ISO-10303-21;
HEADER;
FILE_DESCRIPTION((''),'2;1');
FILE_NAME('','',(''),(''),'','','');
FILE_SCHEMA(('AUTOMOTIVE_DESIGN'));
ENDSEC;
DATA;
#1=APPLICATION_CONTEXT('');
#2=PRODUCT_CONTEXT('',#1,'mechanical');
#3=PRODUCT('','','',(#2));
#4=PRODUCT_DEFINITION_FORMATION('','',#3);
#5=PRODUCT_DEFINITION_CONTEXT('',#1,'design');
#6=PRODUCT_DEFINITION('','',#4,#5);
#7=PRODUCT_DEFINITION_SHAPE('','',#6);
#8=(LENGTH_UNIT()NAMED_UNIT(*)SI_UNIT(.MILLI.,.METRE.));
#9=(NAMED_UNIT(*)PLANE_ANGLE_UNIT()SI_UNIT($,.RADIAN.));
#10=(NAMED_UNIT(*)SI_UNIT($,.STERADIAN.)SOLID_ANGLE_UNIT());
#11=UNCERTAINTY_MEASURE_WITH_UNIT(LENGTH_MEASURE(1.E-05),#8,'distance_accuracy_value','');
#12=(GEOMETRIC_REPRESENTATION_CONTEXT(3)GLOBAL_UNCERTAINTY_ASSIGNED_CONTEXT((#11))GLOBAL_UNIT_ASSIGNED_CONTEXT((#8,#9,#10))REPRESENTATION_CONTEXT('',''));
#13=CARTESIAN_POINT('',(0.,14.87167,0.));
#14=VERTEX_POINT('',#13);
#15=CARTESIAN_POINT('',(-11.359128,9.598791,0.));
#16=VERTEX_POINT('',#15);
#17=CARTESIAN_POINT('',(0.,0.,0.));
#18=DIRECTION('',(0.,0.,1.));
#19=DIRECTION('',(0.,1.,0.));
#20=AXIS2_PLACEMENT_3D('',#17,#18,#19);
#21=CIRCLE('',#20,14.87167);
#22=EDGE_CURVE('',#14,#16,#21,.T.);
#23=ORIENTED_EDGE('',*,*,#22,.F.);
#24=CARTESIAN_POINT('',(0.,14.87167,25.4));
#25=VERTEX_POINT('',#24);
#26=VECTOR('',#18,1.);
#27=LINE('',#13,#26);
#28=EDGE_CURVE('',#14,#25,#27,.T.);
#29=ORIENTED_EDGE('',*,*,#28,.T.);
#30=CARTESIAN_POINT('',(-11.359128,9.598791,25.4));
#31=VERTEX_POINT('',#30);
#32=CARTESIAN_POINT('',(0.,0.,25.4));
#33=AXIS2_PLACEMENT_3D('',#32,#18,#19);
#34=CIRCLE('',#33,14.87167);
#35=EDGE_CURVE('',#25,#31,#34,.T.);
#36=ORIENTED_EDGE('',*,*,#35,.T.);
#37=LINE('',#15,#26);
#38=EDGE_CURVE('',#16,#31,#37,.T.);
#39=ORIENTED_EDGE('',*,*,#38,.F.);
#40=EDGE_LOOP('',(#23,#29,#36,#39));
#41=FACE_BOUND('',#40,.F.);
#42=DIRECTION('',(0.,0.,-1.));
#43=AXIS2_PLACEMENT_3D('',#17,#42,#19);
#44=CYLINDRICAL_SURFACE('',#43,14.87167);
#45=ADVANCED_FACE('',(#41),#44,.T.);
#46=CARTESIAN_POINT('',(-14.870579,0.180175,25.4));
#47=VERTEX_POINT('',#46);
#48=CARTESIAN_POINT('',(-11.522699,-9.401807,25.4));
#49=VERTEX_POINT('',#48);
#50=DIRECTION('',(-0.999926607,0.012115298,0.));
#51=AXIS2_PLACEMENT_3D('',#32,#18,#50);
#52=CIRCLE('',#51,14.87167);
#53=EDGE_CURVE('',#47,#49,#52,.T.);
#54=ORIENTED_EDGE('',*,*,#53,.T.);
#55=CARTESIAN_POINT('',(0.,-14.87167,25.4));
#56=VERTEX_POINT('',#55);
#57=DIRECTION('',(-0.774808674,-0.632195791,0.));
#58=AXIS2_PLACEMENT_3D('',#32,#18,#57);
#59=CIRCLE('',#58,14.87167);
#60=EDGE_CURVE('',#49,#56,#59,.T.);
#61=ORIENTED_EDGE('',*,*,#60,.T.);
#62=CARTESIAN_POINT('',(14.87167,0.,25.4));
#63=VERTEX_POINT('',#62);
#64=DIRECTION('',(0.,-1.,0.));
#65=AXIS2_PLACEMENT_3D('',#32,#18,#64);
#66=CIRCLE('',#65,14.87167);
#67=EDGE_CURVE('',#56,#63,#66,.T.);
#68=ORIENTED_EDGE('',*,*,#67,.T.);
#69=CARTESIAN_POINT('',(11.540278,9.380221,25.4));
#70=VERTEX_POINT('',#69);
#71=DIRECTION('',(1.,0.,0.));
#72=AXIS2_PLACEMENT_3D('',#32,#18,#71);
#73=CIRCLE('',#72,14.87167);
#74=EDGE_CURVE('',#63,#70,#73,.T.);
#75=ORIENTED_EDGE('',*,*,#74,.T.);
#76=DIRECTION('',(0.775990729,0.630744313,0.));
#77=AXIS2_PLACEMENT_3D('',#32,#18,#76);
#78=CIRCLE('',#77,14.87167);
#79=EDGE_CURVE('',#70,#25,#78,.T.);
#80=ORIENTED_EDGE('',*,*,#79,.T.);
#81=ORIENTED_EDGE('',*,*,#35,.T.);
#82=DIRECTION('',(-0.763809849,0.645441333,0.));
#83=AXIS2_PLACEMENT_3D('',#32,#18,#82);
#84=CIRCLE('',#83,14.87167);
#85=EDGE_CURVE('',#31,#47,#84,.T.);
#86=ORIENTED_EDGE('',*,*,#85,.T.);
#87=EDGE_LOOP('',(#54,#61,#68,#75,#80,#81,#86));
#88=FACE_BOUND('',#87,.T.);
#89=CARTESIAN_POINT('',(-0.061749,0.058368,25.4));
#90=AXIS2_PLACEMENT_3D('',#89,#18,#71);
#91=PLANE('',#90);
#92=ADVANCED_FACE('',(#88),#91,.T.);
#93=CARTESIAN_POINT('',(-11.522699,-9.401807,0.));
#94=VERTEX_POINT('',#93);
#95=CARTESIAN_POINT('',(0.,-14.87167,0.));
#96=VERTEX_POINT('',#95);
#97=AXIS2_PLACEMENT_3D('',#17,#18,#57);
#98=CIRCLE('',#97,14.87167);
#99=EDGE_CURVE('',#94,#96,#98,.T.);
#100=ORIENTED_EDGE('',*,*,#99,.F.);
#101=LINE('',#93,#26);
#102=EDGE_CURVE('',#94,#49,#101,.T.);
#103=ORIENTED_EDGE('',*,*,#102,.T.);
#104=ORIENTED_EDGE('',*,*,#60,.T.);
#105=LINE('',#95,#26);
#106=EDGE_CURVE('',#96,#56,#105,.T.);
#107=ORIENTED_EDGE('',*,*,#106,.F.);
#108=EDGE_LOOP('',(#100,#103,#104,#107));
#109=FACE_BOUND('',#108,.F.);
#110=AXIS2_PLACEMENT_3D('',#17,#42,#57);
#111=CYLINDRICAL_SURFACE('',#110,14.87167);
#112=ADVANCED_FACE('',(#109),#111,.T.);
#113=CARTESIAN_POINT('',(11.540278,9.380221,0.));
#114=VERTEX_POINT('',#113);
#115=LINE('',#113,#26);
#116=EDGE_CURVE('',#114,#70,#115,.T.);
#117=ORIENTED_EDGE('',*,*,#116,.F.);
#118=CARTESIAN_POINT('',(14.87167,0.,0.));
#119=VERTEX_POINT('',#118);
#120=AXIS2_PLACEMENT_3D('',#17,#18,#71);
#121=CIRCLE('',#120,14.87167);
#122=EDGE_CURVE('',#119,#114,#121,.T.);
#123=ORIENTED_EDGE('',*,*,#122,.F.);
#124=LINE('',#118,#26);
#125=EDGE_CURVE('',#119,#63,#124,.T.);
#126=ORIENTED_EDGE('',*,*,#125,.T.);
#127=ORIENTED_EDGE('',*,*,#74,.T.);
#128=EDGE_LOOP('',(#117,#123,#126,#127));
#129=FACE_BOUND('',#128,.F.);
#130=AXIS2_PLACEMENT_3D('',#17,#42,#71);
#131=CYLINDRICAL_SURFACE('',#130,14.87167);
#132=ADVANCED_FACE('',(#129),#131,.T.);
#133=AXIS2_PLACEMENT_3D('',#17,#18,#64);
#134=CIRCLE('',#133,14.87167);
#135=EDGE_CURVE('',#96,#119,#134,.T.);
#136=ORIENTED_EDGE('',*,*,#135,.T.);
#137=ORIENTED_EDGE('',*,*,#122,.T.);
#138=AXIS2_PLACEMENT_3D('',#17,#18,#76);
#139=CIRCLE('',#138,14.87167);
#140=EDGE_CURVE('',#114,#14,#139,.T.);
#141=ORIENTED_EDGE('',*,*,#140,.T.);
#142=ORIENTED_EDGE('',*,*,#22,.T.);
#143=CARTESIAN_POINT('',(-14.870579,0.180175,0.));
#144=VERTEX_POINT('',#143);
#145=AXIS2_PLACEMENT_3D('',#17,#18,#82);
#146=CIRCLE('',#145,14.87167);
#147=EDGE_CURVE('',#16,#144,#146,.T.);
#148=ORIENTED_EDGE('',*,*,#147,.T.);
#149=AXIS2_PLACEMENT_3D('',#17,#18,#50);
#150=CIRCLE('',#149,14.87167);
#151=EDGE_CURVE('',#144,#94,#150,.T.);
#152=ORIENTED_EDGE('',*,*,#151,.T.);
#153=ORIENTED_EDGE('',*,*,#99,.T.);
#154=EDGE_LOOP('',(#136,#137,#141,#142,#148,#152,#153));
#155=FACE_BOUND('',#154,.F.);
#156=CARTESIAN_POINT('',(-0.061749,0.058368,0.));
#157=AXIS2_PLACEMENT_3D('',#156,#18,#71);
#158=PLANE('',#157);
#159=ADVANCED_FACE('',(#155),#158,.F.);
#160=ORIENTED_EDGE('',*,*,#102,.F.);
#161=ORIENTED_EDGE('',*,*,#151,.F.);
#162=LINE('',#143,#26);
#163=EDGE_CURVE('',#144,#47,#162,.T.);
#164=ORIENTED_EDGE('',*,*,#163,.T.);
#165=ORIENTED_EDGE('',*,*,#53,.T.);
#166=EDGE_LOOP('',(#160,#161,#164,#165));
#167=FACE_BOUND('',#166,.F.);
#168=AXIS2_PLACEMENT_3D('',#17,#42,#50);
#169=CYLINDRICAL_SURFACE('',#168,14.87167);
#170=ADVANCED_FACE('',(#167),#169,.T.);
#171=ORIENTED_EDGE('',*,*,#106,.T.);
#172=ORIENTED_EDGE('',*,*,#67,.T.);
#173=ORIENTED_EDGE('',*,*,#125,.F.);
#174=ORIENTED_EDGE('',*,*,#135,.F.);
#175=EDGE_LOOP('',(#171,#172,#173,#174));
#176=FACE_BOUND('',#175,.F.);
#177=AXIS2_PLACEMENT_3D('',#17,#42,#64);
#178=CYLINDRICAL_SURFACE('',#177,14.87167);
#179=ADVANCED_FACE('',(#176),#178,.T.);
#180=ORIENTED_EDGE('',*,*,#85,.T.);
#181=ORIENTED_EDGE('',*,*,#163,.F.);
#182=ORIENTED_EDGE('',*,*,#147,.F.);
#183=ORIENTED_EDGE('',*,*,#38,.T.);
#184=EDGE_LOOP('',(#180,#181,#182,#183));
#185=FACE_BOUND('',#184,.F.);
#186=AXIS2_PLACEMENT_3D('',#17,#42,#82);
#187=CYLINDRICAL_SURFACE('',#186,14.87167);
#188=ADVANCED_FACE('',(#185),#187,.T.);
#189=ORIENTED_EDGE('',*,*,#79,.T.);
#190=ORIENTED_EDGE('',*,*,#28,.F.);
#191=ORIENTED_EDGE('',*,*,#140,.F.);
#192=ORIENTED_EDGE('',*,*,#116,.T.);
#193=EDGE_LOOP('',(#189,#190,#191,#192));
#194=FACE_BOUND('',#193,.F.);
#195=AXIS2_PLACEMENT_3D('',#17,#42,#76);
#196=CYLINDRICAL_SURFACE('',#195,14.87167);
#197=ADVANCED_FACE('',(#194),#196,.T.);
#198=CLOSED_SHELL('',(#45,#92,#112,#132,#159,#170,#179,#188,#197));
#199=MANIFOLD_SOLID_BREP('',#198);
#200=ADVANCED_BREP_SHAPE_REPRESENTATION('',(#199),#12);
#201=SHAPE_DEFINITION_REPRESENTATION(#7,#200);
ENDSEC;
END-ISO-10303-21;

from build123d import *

# Parameters (mm, degrees)
F4_DEPTH = 25.4


# Not quite as in the source:
# - the program builds the solid bodies; features that only make, move or delete a surface that nothing else refers to are left out


with BuildPart() as f4:
    # F2 (on Top) → F4 (new body)
    with BuildSketch(Plane.XY):
        with BuildLine():
            ThreePointArc((0, -14.8716701685), (10.5158588237, -10.5158588237), (14.8716701685, 0))
            ThreePointArc((14.8716701685, 0), (14.0140961938, 4.9771157786), (11.5402781738, 9.3802213871))
            ThreePointArc((11.5402781738, 9.3802213871), (6.390110133, 13.4288147686), (0, 14.8716701685))
            ThreePointArc((0, 14.8716701685), (-6.2616501648, 13.4891923707), (-11.3591281509, 9.598790614))
            ThreePointArc((-11.3591281509, 9.598790614), (-13.9347393829, 5.1951527343), (-14.8705786933, 0.1801747106))
            ThreePointArc((-14.8705786933, 0.1801747106), (-14.0394042685, -4.9052728146), (-11.5226990459, -9.401807289))
            ThreePointArc((-11.5226990459, -9.401807289), (-6.3775385774, -13.4347897377), (0, -14.8716701685))
        make_face()
    extrude(amount=F4_DEPTH)


solid = f4.part
